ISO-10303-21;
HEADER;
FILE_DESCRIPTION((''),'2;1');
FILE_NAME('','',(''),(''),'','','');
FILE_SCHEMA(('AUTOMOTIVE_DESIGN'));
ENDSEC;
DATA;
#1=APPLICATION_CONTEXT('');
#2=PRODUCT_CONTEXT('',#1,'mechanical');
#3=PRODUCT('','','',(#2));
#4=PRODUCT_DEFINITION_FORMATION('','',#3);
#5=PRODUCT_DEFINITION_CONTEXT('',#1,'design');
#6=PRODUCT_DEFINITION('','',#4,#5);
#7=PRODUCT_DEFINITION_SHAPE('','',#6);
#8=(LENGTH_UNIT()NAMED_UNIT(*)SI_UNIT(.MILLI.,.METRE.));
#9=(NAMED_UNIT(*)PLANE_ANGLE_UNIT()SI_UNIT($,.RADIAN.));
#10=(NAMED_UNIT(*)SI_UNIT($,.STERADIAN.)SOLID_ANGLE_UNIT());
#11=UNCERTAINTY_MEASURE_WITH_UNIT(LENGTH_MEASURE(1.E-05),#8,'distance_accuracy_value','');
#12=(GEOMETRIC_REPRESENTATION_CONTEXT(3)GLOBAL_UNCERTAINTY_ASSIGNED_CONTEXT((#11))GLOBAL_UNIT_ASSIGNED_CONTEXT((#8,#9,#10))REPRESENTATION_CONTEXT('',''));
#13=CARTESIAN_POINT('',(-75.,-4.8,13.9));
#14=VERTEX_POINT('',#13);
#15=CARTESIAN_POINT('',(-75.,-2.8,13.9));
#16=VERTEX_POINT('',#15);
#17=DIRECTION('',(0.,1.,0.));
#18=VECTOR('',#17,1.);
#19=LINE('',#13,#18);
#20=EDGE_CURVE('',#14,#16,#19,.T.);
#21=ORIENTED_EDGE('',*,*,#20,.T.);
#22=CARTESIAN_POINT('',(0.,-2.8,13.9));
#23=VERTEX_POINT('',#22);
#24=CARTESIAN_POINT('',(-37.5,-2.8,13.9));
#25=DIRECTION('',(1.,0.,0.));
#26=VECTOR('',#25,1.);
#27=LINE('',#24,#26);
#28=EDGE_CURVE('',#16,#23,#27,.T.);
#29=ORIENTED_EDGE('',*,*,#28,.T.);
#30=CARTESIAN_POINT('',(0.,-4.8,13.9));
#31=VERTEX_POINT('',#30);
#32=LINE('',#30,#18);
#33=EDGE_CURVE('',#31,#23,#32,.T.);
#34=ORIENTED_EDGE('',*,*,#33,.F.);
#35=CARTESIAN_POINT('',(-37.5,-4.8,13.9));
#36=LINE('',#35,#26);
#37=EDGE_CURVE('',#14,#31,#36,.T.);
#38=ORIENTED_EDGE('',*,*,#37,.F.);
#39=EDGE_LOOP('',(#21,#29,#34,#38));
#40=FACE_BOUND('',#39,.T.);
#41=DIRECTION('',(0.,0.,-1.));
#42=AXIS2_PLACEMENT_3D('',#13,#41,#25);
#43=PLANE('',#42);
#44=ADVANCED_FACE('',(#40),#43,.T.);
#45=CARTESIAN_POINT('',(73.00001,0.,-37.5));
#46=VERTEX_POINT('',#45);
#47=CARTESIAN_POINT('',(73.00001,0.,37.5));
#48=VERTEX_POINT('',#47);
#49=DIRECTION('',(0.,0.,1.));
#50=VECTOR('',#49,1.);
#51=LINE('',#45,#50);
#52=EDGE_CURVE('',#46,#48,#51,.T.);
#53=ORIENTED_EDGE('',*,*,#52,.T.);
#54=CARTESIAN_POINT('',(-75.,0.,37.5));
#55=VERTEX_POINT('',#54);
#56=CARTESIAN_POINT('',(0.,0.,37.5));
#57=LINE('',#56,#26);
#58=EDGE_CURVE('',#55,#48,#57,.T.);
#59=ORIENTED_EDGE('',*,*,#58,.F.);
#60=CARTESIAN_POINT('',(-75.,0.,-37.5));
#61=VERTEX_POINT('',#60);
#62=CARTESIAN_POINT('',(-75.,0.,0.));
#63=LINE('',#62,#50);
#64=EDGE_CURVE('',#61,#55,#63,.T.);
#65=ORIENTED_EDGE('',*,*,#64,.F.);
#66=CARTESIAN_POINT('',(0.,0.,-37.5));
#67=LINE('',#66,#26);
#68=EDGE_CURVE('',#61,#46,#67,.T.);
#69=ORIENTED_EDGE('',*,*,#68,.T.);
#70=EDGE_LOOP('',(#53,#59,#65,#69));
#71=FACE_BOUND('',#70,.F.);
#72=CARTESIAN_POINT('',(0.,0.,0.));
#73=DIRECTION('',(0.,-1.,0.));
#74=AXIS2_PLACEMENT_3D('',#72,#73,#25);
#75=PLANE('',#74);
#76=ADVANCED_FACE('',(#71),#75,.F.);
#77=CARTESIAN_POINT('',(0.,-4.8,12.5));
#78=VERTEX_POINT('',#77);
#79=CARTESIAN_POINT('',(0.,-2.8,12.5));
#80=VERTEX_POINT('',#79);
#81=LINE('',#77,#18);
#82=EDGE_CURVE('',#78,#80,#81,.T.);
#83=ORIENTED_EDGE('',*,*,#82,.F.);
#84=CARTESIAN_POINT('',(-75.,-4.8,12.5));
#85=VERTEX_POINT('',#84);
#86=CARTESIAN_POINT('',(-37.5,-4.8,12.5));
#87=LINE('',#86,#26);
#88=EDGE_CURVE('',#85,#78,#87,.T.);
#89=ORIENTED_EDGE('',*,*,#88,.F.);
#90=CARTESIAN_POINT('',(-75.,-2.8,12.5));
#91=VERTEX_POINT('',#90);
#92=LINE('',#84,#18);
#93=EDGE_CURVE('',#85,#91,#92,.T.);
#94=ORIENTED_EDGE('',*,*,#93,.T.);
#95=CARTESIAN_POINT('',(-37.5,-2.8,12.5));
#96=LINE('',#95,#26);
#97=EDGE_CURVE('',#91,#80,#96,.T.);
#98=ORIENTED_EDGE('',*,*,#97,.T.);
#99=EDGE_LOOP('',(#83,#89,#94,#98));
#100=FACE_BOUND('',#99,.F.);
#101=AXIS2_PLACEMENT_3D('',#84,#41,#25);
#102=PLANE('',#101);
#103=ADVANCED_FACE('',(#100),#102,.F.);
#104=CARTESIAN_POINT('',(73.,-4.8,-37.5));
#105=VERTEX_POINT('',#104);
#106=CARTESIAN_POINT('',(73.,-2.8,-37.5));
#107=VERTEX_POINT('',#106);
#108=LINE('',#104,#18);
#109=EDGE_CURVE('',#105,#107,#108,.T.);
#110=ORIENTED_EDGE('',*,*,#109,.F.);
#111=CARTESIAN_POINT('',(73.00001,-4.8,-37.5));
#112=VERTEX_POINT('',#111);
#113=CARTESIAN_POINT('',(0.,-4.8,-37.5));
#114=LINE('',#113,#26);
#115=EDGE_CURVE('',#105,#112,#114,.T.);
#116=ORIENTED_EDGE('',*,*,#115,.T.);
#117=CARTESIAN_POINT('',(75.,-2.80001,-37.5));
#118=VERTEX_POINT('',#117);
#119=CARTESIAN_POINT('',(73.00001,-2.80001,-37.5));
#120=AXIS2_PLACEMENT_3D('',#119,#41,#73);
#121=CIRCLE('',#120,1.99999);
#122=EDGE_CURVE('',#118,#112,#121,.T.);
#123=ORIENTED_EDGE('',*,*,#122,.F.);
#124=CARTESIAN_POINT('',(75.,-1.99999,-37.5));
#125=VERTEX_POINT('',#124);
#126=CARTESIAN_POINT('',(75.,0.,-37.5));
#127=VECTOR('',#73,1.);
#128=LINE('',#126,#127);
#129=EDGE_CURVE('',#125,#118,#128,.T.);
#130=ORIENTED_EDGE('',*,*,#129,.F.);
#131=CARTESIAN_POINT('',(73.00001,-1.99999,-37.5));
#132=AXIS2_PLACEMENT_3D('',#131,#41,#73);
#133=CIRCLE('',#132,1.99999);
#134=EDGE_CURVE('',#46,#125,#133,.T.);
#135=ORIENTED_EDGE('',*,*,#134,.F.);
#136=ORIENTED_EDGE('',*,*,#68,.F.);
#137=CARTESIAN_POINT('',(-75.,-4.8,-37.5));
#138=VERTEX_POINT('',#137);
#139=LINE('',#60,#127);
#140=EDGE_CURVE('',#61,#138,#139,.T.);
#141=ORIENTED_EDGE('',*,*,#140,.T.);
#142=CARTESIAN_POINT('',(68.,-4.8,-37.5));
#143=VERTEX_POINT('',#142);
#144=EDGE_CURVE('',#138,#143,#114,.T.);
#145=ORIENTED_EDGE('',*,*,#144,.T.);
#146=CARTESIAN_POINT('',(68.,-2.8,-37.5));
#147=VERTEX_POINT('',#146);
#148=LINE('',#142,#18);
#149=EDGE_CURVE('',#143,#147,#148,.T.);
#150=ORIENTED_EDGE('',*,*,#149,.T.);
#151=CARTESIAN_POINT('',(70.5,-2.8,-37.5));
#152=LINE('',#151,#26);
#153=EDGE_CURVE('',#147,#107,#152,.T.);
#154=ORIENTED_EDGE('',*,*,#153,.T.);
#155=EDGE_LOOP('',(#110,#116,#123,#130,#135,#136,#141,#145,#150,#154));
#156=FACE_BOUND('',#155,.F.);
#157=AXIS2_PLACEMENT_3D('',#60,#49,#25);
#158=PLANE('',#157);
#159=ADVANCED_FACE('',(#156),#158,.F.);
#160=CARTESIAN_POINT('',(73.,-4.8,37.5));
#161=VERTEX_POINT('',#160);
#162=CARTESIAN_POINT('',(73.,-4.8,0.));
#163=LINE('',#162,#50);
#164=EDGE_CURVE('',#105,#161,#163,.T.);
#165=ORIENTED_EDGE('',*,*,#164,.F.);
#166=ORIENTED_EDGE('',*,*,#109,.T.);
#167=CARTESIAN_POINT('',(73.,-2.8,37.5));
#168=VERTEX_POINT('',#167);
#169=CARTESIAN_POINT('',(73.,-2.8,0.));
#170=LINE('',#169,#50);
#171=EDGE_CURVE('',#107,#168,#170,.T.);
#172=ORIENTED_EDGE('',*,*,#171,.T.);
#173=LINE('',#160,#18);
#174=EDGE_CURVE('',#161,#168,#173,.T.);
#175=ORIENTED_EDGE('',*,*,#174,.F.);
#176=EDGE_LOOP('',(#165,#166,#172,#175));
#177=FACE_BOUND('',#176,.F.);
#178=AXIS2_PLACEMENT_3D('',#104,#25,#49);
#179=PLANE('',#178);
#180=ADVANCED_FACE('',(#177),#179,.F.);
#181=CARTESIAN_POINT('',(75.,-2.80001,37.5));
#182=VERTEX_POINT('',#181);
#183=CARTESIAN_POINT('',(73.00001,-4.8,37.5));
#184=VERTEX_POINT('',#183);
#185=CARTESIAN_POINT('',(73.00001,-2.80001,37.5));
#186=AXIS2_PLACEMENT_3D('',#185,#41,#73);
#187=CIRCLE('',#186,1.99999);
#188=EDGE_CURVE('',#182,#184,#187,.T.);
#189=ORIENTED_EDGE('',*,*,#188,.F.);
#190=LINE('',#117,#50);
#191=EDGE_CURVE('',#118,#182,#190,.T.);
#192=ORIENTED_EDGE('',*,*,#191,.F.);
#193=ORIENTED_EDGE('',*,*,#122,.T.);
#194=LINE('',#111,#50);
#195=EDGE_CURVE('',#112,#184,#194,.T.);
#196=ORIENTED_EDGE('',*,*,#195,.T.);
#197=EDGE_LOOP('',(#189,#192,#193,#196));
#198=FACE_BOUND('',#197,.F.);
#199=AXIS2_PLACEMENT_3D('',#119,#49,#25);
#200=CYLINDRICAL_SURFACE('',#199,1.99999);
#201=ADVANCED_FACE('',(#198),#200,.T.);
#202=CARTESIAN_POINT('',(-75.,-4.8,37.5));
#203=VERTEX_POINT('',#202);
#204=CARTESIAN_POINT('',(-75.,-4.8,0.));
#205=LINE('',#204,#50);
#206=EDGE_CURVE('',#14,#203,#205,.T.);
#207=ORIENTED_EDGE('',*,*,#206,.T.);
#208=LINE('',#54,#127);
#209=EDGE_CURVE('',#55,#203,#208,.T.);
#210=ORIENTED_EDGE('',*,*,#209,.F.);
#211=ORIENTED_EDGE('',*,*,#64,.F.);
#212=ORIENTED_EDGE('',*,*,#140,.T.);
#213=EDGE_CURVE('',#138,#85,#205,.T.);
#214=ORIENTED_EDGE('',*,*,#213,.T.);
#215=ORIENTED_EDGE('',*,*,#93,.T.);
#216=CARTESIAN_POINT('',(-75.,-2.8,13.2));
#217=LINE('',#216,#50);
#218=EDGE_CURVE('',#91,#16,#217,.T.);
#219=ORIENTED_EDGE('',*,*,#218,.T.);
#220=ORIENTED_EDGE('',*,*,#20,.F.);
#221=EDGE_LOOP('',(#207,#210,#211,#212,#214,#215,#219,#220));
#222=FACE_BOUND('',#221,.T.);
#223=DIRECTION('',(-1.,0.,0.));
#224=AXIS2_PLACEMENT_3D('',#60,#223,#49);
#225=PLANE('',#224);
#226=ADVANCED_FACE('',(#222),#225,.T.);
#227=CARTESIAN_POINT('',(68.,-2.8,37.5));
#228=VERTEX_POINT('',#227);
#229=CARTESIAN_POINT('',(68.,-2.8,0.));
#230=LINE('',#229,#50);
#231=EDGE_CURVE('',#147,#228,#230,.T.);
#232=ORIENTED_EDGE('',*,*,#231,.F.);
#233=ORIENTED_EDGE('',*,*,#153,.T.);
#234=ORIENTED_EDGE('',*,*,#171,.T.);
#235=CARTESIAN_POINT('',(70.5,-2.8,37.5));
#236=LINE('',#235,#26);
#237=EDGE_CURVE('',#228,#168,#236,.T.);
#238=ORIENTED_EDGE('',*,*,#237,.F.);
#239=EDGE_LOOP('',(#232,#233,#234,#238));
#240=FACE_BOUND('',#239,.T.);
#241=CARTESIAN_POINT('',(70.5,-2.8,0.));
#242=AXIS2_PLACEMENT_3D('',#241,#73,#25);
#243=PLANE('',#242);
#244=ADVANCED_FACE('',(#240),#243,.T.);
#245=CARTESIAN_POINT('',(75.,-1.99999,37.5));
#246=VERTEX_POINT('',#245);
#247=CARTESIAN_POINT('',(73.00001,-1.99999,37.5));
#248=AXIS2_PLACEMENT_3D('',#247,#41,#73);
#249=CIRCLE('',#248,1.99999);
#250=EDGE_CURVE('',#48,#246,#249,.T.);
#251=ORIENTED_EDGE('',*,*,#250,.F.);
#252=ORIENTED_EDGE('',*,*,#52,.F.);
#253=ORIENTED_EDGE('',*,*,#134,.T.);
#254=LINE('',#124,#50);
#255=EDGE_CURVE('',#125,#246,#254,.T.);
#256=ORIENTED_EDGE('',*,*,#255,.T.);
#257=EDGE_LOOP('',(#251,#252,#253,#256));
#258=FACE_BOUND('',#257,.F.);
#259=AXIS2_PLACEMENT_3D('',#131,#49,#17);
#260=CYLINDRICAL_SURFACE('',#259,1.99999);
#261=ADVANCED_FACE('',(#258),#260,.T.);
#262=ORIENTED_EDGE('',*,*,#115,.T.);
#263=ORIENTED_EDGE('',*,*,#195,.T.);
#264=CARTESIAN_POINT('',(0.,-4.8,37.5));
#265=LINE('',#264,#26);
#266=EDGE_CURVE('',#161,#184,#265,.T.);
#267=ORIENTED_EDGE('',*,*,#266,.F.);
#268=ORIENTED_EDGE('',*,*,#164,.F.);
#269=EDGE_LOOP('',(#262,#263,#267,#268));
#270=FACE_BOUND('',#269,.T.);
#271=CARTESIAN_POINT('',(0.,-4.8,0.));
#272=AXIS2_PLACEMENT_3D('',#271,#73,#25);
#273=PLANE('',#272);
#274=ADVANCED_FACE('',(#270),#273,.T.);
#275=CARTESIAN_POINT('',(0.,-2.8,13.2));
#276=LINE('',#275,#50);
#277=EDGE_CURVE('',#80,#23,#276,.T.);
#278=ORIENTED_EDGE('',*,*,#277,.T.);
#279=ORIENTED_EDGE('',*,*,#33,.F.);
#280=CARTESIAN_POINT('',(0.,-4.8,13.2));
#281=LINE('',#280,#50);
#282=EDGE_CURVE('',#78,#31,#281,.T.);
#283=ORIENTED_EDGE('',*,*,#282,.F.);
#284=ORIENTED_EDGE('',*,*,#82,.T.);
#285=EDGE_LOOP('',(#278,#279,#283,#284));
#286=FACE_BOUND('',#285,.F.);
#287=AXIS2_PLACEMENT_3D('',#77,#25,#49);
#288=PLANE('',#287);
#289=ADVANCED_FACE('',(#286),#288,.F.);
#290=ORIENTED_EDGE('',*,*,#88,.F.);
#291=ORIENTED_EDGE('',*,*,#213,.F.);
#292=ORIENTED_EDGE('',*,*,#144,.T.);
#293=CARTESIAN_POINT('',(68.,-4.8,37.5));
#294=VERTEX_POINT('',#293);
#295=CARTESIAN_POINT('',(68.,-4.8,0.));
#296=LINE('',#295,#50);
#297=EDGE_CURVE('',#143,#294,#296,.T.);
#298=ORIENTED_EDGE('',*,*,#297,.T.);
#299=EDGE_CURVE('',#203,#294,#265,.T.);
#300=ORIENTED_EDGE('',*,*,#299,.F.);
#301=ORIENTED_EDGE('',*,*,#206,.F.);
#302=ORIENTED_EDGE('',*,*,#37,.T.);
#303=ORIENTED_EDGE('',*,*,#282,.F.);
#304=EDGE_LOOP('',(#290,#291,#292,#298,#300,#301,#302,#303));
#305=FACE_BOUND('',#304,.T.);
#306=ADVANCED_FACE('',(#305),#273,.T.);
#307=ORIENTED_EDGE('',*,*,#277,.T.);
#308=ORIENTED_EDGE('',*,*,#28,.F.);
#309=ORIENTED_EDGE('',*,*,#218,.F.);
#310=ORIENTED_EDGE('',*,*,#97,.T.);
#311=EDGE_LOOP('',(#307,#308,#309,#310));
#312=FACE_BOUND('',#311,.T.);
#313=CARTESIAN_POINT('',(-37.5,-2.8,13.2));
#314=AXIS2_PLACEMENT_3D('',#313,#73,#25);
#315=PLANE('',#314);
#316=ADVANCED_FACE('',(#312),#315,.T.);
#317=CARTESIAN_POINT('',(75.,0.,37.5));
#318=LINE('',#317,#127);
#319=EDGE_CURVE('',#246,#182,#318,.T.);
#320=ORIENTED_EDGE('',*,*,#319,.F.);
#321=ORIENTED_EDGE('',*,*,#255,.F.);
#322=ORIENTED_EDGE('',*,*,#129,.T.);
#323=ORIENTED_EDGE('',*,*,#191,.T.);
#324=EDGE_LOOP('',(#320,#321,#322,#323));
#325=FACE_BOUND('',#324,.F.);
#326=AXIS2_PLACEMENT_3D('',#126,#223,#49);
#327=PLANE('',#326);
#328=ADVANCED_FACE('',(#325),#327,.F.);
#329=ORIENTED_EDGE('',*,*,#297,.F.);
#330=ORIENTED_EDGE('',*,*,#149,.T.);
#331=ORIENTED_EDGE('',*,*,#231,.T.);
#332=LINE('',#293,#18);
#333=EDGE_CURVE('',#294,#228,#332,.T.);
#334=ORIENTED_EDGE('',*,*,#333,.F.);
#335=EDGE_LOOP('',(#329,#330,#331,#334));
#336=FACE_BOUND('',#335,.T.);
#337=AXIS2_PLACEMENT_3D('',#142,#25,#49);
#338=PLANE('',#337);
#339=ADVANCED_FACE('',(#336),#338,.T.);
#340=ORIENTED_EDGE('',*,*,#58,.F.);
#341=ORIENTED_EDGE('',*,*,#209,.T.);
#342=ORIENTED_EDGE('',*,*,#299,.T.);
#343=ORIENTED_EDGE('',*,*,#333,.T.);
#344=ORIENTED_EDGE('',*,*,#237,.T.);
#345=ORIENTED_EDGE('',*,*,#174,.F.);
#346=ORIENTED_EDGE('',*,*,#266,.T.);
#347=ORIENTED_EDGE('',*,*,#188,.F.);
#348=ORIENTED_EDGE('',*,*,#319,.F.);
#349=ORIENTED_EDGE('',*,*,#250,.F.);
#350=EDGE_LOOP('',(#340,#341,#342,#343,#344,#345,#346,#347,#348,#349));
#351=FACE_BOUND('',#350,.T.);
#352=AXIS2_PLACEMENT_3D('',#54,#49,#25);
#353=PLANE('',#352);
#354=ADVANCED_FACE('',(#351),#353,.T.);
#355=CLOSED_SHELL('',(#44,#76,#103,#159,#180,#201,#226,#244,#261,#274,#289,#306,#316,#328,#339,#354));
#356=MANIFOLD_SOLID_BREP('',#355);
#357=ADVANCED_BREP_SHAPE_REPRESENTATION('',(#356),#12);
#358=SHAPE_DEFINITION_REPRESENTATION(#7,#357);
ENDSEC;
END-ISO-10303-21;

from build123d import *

# Parameters (mm, degrees)
F0_W     = 150
F0_H     = 75
F1_DEPTH = 4.8
F2_W     = 5
F2_H     = 75
F2_W_2   = 75
F2_H_2   = 1.4
F3_DEPTH = 2
F4_R     = 1.99999


# Not quite as in the source:
# - a fillet or chamfer is up to 0.001 mm smaller than in the source, because OpenCascade refuses the exact size


with BuildPart() as f1:
    # F0 (on Front) → F1 (new body)
    with BuildSketch(Plane.XZ):
        Rectangle(F0_W, F0_H)
    extrude(amount=F1_DEPTH)

    # F2 (on face) → F3 (cut)
    with BuildSketch(Plane.XZ.offset(4.8)):
        with Locations((70.5, 0)):
            Rectangle(F2_W, F2_H)
        with Locations((-37.5, 13.2)):
            Rectangle(F2_W_2, F2_H_2)
    extrude(amount=-F3_DEPTH, mode=Mode.SUBTRACT)

    # F4 (radius 2 in the source; OpenCascade refuses exactly that, so slightly less here)
    f4_edges = [f1.edges().sort_by_distance(p)[0] for p in [
        (75, 0, 0),
        (75, -4.8, 0),
    ]]
    fillet(f4_edges, radius=F4_R)


solid = f1.part
